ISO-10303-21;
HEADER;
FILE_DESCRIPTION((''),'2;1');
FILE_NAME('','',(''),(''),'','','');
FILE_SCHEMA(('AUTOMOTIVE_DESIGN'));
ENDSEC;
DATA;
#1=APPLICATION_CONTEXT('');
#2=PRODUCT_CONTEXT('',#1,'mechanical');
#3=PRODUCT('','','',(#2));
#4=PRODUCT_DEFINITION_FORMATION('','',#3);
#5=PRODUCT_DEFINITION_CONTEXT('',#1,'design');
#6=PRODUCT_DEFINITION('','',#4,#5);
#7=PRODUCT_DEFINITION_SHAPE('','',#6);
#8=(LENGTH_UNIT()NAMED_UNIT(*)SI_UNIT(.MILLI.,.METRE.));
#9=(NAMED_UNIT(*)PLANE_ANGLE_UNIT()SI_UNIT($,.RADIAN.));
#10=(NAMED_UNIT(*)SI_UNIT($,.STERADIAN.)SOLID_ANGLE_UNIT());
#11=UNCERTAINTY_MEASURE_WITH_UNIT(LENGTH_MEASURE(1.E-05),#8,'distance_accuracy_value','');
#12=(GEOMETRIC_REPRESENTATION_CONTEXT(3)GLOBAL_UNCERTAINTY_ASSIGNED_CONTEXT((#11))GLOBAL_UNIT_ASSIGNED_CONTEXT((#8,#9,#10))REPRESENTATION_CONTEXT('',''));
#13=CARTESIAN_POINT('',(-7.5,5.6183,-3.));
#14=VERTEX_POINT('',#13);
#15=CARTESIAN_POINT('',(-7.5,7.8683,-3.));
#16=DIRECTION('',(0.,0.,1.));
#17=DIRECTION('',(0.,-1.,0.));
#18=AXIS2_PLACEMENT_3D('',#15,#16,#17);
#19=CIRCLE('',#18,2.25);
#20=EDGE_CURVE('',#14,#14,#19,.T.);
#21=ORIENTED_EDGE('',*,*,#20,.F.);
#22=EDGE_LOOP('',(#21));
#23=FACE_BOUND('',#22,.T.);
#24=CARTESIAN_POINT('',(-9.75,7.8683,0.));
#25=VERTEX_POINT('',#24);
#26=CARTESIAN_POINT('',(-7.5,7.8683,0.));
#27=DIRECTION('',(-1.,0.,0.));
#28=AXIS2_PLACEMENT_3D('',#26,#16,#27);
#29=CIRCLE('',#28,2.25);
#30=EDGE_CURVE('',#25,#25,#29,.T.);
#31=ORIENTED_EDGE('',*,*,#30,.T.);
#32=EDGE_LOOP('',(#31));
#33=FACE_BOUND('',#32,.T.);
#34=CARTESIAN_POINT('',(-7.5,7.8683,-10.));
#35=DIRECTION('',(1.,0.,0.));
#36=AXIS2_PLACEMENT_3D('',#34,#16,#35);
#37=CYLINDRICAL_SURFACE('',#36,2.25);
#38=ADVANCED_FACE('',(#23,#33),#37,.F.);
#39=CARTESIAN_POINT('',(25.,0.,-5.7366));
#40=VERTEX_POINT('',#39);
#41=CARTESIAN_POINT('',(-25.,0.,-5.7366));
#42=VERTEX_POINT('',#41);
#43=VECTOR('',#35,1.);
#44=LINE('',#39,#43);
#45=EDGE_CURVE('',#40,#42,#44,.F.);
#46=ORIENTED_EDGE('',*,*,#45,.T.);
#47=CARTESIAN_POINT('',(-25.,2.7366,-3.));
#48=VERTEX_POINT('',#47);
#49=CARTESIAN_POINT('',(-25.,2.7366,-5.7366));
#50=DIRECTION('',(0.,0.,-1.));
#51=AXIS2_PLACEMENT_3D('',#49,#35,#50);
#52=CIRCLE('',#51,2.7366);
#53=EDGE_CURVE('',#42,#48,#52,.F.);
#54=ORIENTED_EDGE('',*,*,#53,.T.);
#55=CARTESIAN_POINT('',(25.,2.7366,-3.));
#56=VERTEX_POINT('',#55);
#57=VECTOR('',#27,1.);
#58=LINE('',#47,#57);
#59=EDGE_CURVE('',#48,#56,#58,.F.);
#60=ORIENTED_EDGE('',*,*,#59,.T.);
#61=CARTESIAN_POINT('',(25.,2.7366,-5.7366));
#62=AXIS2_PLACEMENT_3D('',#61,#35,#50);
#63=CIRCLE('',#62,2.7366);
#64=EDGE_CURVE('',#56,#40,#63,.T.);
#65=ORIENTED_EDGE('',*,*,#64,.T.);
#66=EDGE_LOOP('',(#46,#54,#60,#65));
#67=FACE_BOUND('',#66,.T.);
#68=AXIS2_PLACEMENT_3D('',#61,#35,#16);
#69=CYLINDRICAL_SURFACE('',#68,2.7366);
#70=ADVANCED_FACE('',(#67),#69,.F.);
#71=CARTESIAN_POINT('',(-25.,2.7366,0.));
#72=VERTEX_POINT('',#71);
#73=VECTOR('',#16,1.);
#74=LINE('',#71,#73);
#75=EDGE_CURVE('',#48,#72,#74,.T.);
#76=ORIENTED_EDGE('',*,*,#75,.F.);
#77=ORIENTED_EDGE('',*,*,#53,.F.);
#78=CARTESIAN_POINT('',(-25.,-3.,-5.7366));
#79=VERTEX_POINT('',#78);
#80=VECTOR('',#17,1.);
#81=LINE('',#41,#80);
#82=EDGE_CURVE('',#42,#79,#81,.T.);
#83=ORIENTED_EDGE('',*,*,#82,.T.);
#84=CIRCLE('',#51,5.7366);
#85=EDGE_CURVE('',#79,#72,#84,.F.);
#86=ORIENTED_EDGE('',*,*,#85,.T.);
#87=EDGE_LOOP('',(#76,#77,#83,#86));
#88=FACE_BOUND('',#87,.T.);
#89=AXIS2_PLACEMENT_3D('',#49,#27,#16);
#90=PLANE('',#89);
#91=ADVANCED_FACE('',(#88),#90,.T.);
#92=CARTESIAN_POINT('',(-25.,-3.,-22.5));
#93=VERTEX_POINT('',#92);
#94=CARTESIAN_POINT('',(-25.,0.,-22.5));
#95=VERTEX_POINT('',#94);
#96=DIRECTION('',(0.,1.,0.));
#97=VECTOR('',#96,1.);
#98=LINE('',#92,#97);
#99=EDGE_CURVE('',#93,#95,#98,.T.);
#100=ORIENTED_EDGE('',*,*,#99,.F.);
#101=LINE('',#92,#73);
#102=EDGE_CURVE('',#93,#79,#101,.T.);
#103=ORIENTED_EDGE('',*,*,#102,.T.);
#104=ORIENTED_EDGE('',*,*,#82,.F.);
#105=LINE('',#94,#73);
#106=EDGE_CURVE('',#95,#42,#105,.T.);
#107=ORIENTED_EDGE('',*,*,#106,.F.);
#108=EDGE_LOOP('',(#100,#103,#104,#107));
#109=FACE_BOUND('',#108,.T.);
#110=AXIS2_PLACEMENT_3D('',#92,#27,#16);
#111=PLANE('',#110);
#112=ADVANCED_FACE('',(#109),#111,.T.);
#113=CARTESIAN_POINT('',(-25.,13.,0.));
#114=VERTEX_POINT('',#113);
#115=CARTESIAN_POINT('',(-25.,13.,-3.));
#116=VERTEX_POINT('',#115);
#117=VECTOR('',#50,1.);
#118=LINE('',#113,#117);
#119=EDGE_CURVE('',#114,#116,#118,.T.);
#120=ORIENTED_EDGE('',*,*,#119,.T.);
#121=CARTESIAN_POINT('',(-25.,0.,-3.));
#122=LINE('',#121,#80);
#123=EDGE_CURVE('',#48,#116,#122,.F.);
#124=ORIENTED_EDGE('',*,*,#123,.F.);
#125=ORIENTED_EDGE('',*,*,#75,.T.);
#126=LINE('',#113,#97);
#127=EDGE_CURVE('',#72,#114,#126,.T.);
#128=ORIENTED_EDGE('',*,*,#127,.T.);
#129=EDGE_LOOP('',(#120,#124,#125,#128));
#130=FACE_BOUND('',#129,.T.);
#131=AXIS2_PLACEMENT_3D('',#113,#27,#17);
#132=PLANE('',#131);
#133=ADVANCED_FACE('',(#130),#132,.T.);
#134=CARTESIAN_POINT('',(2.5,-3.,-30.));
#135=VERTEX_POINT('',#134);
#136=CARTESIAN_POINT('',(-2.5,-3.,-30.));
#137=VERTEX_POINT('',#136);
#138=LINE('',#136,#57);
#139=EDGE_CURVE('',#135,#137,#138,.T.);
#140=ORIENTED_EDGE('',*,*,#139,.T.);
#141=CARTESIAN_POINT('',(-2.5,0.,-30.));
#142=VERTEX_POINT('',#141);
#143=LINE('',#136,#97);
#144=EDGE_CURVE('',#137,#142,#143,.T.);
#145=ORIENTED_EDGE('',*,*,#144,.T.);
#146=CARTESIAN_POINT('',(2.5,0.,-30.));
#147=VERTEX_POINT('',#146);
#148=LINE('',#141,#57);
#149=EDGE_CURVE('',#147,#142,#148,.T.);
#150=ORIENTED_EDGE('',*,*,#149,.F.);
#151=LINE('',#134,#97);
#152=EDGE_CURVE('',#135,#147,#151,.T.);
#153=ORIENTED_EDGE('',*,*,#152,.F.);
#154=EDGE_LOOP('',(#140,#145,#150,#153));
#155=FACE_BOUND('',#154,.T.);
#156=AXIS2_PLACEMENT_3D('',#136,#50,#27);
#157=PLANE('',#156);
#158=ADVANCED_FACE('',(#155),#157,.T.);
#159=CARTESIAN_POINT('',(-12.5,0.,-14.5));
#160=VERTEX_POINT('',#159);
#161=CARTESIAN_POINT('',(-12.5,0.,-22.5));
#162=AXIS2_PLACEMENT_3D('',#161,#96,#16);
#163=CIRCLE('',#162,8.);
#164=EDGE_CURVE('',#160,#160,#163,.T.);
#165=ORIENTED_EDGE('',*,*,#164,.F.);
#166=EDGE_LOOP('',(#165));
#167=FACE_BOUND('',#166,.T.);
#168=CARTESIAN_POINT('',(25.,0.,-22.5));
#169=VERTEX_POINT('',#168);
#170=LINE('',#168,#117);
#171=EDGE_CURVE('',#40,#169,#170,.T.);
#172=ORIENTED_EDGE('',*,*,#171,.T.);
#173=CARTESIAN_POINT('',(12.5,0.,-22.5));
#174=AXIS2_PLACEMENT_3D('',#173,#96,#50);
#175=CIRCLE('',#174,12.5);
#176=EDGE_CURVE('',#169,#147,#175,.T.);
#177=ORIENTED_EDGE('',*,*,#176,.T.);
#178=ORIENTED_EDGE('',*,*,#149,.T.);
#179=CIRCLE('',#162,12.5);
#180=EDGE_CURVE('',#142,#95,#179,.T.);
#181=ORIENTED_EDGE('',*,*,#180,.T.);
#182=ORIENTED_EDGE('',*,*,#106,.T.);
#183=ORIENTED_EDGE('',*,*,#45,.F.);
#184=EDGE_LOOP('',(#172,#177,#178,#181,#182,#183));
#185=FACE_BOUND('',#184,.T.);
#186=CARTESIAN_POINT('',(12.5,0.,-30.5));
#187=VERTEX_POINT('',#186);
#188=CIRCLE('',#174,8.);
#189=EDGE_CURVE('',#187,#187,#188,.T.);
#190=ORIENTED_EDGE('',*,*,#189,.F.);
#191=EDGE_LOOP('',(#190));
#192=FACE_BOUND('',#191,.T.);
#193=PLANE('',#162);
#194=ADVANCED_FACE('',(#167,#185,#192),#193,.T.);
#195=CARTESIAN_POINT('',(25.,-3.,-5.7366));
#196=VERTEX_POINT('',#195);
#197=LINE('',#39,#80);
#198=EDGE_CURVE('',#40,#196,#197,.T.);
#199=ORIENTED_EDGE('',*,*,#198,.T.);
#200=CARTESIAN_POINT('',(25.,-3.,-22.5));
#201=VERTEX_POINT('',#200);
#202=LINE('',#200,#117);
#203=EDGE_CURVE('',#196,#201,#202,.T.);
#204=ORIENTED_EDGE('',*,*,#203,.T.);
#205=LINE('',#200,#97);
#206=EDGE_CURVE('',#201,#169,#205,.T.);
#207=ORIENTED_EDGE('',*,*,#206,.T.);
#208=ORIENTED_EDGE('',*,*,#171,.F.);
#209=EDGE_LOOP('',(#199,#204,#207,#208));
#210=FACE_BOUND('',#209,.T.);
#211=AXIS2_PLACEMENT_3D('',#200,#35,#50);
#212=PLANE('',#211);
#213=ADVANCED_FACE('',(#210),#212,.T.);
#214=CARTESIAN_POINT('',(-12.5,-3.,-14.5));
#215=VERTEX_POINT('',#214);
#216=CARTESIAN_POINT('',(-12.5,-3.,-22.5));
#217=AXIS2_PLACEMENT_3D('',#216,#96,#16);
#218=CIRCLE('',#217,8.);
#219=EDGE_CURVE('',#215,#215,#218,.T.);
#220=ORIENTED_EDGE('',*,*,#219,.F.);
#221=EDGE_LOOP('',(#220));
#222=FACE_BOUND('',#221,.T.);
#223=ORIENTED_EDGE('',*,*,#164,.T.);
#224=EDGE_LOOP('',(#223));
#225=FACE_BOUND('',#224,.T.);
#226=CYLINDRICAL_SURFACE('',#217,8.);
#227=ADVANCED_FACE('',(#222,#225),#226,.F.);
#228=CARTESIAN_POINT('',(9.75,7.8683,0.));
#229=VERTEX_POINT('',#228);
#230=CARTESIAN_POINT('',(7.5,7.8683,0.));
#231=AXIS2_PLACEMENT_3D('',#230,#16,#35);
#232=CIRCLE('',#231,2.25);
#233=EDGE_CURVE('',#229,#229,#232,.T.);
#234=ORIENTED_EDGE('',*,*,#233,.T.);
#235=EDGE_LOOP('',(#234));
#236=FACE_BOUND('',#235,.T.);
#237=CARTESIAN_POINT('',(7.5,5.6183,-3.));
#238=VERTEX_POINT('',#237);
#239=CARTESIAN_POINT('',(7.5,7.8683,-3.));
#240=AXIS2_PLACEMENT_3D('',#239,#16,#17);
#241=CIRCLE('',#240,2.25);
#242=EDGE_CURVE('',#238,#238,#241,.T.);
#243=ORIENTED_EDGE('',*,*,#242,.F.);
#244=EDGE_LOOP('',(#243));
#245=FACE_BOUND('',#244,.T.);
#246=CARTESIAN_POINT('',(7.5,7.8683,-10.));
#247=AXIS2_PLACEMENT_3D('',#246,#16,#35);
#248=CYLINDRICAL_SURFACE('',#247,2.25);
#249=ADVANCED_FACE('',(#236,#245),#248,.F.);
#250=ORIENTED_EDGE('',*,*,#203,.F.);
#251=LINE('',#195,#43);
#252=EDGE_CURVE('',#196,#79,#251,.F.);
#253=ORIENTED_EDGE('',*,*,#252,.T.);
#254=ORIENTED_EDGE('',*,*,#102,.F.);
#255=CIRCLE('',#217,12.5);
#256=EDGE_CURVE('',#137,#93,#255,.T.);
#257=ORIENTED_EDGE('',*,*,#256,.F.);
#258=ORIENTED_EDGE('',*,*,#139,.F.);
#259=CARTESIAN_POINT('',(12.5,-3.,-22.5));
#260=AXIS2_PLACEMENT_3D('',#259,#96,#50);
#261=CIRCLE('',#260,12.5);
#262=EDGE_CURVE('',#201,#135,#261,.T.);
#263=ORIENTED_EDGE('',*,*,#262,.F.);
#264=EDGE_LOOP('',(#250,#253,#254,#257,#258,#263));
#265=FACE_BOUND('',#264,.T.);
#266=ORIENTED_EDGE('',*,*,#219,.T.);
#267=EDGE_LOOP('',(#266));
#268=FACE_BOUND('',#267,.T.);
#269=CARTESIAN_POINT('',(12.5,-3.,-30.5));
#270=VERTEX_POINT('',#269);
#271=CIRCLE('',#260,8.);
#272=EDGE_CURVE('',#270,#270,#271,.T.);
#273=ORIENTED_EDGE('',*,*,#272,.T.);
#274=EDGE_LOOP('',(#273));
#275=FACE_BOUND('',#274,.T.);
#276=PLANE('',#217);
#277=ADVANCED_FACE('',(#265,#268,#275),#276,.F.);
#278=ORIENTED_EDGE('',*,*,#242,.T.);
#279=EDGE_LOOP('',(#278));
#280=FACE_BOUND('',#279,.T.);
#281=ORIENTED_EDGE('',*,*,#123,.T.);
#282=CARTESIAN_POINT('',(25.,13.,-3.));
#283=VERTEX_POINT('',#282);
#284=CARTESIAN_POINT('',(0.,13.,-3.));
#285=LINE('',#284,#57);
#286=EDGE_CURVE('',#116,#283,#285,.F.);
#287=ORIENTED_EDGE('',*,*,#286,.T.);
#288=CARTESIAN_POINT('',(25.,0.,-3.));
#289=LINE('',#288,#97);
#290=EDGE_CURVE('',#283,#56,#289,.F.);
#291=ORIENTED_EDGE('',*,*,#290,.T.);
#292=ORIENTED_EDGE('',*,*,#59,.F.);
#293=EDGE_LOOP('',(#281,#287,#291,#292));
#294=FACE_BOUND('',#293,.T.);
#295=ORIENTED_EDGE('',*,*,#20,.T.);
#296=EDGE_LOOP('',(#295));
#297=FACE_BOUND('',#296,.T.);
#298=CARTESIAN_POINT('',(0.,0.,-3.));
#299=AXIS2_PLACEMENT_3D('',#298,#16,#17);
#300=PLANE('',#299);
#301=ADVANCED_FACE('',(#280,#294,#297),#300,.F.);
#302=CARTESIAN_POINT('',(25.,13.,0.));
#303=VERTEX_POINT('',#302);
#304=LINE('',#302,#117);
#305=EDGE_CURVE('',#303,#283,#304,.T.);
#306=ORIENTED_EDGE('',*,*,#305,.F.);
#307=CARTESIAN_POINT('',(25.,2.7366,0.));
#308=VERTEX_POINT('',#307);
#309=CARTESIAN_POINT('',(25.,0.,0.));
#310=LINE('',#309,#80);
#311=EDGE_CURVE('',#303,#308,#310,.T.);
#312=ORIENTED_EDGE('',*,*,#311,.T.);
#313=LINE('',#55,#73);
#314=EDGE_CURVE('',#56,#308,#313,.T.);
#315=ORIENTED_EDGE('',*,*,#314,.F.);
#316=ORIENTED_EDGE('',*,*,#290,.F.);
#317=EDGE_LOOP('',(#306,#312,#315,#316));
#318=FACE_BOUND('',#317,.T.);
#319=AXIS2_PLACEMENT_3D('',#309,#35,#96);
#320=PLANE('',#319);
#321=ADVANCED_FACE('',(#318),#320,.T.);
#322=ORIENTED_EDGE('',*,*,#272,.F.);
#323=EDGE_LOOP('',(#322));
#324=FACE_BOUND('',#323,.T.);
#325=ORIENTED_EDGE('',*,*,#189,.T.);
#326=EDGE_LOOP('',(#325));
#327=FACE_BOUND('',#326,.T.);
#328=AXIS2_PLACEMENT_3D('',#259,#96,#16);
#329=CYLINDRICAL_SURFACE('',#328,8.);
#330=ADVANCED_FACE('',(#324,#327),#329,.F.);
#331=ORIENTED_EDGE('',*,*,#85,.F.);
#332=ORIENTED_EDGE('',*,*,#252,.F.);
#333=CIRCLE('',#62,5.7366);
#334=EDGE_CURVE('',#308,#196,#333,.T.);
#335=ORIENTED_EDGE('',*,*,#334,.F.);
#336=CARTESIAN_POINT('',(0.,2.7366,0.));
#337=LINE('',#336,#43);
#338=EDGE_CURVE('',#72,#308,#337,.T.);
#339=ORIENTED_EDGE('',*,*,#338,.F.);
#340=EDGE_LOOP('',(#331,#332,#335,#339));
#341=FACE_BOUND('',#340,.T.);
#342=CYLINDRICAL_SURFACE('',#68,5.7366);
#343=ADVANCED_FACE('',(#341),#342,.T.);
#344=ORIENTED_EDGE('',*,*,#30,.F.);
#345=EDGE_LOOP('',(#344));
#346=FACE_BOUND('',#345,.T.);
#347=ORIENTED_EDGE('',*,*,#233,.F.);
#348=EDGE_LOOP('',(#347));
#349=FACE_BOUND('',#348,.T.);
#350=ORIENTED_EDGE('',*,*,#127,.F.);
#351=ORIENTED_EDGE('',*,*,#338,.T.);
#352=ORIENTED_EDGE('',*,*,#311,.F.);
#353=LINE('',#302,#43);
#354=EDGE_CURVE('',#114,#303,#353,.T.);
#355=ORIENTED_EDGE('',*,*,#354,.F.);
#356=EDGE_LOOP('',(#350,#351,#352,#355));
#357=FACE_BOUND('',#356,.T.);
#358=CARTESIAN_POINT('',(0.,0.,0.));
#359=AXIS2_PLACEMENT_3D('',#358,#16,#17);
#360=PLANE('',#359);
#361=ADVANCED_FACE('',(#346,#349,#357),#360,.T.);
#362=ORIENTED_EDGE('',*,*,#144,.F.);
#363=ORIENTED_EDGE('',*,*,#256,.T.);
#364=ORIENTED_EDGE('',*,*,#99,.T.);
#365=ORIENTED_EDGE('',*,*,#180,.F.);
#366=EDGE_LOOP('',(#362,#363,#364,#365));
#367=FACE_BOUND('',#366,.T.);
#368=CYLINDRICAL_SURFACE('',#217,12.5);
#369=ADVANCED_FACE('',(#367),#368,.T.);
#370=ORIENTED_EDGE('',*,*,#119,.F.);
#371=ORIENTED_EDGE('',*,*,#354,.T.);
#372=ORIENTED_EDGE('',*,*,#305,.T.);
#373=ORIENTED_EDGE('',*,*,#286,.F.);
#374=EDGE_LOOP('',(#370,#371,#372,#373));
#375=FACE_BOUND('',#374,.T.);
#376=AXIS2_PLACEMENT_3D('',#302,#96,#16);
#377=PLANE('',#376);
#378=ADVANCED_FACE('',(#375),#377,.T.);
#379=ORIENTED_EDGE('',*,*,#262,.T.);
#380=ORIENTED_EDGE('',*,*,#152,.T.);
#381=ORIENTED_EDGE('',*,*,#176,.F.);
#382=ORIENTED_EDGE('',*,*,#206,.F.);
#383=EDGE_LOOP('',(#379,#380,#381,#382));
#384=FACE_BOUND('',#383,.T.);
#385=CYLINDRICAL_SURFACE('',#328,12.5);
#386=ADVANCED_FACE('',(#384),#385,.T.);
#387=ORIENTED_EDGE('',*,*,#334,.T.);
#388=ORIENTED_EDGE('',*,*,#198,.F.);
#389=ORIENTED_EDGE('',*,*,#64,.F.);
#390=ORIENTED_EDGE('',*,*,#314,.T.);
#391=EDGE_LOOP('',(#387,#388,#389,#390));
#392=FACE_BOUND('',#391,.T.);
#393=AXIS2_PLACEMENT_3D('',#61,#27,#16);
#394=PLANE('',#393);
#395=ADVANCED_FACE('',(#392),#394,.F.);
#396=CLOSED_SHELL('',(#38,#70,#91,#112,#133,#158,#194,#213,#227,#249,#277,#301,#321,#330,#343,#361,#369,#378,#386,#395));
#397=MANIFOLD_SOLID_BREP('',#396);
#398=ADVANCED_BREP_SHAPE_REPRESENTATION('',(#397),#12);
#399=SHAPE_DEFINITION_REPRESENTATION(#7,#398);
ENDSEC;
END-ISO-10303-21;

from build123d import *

# Parameters (mm, degrees)
SKETCH_1_R                       = 8
SM_BASE_FLANGE_1_DEPTH           = 3
SM_EDGE_FLANGE_1_STRIP_W         = 17.4732
SM_EDGE_FLANGE_1_STRIP_H         = 3
SM_EDGE_FLANGE_1_STRIP_CUT_DEPTH = 50
SM_EDGE_FLANGE_1_DEPTH           = 50
SKETCH_9_R                       = 2.25
CUT_EXTRUDE_1_DEPTH              = 10


# Sheet-metal steps are written as plain solids
with BuildPart() as part:
    # Sketch 1 → 基体-法兰1 (new body)
    with BuildSketch(Plane(origin=(0, 0, 0), x_dir=(1, 0, 0), z_dir=(0, 1, 0))):
        with BuildLine():
            Line((-25, 22.5), (-25, 0))
            Line((-25, 0), (25, 0))
            Line((25, 0), (25, 22.5))
            ThreePointArc((25, 22.5), (16.452847075, 34.358541226), (2.5, 30))
            Line((2.5, 30), (-2.5, 30))
            ThreePointArc((-2.5, 30), (-16.452847075, 34.358541226), (-25, 22.5))
        make_face()
        with Locations(Location((-12.5, 22.5, 0), (0, 0, 270))):
            Circle(SKETCH_1_R, mode=Mode.SUBTRACT)
        with Locations(Location((12.5, 22.5, 0), (0, 0, 90))):
            Circle(SKETCH_1_R, mode=Mode.SUBTRACT)
    extrude(amount=-SM_BASE_FLANGE_1_DEPTH)

    # 边线-法兰1 strip (across the edge) → 边线-法兰1 strip cut (cut)
    with BuildSketch(Plane(origin=(-25, 0, 0), x_dir=(0, 0, -1), z_dir=(1, 0, 0))):
        with Locations((-3, -1.5)):
            Rectangle(SM_EDGE_FLANGE_1_STRIP_W, SM_EDGE_FLANGE_1_STRIP_H)
    extrude(amount=SM_EDGE_FLANGE_1_STRIP_CUT_DEPTH, mode=Mode.SUBTRACT)

    # 边线-法兰1 section (across the edge) → 边线-法兰1 (add)
    with BuildSketch(Plane(origin=(-25, 0, 0), x_dir=(0, 0, -1), z_dir=(1, 0, 0))):
        with BuildLine():
            Line((0, 2.7366), (0, 13))
            Line((0, 13), (3, 13))
            Line((3, 13), (3, 2.7366))
            ThreePointArc((3, 2.7366), (3.801531583, 0.801531583), (5.7366, 0))
            Line((5.7366, 0), (5.7366, -3))
            ThreePointArc((5.7366, -3), (1.680211239, -1.319788761), (0, 2.7366))
        make_face()
    extrude(amount=SM_EDGE_FLANGE_1_DEPTH)

    # 草图9 → 切除-拉伸1 (cut)
    with BuildSketch(Plane.XY):
        with Locations((7.5, 7.8683)):
            Circle(SKETCH_9_R)
        with Locations(Location((-7.5, 7.8683, 0), (0, 0, 270))):
            Circle(SKETCH_9_R)
    extrude(amount=-CUT_EXTRUDE_1_DEPTH, mode=Mode.SUBTRACT)


solid = part.part
